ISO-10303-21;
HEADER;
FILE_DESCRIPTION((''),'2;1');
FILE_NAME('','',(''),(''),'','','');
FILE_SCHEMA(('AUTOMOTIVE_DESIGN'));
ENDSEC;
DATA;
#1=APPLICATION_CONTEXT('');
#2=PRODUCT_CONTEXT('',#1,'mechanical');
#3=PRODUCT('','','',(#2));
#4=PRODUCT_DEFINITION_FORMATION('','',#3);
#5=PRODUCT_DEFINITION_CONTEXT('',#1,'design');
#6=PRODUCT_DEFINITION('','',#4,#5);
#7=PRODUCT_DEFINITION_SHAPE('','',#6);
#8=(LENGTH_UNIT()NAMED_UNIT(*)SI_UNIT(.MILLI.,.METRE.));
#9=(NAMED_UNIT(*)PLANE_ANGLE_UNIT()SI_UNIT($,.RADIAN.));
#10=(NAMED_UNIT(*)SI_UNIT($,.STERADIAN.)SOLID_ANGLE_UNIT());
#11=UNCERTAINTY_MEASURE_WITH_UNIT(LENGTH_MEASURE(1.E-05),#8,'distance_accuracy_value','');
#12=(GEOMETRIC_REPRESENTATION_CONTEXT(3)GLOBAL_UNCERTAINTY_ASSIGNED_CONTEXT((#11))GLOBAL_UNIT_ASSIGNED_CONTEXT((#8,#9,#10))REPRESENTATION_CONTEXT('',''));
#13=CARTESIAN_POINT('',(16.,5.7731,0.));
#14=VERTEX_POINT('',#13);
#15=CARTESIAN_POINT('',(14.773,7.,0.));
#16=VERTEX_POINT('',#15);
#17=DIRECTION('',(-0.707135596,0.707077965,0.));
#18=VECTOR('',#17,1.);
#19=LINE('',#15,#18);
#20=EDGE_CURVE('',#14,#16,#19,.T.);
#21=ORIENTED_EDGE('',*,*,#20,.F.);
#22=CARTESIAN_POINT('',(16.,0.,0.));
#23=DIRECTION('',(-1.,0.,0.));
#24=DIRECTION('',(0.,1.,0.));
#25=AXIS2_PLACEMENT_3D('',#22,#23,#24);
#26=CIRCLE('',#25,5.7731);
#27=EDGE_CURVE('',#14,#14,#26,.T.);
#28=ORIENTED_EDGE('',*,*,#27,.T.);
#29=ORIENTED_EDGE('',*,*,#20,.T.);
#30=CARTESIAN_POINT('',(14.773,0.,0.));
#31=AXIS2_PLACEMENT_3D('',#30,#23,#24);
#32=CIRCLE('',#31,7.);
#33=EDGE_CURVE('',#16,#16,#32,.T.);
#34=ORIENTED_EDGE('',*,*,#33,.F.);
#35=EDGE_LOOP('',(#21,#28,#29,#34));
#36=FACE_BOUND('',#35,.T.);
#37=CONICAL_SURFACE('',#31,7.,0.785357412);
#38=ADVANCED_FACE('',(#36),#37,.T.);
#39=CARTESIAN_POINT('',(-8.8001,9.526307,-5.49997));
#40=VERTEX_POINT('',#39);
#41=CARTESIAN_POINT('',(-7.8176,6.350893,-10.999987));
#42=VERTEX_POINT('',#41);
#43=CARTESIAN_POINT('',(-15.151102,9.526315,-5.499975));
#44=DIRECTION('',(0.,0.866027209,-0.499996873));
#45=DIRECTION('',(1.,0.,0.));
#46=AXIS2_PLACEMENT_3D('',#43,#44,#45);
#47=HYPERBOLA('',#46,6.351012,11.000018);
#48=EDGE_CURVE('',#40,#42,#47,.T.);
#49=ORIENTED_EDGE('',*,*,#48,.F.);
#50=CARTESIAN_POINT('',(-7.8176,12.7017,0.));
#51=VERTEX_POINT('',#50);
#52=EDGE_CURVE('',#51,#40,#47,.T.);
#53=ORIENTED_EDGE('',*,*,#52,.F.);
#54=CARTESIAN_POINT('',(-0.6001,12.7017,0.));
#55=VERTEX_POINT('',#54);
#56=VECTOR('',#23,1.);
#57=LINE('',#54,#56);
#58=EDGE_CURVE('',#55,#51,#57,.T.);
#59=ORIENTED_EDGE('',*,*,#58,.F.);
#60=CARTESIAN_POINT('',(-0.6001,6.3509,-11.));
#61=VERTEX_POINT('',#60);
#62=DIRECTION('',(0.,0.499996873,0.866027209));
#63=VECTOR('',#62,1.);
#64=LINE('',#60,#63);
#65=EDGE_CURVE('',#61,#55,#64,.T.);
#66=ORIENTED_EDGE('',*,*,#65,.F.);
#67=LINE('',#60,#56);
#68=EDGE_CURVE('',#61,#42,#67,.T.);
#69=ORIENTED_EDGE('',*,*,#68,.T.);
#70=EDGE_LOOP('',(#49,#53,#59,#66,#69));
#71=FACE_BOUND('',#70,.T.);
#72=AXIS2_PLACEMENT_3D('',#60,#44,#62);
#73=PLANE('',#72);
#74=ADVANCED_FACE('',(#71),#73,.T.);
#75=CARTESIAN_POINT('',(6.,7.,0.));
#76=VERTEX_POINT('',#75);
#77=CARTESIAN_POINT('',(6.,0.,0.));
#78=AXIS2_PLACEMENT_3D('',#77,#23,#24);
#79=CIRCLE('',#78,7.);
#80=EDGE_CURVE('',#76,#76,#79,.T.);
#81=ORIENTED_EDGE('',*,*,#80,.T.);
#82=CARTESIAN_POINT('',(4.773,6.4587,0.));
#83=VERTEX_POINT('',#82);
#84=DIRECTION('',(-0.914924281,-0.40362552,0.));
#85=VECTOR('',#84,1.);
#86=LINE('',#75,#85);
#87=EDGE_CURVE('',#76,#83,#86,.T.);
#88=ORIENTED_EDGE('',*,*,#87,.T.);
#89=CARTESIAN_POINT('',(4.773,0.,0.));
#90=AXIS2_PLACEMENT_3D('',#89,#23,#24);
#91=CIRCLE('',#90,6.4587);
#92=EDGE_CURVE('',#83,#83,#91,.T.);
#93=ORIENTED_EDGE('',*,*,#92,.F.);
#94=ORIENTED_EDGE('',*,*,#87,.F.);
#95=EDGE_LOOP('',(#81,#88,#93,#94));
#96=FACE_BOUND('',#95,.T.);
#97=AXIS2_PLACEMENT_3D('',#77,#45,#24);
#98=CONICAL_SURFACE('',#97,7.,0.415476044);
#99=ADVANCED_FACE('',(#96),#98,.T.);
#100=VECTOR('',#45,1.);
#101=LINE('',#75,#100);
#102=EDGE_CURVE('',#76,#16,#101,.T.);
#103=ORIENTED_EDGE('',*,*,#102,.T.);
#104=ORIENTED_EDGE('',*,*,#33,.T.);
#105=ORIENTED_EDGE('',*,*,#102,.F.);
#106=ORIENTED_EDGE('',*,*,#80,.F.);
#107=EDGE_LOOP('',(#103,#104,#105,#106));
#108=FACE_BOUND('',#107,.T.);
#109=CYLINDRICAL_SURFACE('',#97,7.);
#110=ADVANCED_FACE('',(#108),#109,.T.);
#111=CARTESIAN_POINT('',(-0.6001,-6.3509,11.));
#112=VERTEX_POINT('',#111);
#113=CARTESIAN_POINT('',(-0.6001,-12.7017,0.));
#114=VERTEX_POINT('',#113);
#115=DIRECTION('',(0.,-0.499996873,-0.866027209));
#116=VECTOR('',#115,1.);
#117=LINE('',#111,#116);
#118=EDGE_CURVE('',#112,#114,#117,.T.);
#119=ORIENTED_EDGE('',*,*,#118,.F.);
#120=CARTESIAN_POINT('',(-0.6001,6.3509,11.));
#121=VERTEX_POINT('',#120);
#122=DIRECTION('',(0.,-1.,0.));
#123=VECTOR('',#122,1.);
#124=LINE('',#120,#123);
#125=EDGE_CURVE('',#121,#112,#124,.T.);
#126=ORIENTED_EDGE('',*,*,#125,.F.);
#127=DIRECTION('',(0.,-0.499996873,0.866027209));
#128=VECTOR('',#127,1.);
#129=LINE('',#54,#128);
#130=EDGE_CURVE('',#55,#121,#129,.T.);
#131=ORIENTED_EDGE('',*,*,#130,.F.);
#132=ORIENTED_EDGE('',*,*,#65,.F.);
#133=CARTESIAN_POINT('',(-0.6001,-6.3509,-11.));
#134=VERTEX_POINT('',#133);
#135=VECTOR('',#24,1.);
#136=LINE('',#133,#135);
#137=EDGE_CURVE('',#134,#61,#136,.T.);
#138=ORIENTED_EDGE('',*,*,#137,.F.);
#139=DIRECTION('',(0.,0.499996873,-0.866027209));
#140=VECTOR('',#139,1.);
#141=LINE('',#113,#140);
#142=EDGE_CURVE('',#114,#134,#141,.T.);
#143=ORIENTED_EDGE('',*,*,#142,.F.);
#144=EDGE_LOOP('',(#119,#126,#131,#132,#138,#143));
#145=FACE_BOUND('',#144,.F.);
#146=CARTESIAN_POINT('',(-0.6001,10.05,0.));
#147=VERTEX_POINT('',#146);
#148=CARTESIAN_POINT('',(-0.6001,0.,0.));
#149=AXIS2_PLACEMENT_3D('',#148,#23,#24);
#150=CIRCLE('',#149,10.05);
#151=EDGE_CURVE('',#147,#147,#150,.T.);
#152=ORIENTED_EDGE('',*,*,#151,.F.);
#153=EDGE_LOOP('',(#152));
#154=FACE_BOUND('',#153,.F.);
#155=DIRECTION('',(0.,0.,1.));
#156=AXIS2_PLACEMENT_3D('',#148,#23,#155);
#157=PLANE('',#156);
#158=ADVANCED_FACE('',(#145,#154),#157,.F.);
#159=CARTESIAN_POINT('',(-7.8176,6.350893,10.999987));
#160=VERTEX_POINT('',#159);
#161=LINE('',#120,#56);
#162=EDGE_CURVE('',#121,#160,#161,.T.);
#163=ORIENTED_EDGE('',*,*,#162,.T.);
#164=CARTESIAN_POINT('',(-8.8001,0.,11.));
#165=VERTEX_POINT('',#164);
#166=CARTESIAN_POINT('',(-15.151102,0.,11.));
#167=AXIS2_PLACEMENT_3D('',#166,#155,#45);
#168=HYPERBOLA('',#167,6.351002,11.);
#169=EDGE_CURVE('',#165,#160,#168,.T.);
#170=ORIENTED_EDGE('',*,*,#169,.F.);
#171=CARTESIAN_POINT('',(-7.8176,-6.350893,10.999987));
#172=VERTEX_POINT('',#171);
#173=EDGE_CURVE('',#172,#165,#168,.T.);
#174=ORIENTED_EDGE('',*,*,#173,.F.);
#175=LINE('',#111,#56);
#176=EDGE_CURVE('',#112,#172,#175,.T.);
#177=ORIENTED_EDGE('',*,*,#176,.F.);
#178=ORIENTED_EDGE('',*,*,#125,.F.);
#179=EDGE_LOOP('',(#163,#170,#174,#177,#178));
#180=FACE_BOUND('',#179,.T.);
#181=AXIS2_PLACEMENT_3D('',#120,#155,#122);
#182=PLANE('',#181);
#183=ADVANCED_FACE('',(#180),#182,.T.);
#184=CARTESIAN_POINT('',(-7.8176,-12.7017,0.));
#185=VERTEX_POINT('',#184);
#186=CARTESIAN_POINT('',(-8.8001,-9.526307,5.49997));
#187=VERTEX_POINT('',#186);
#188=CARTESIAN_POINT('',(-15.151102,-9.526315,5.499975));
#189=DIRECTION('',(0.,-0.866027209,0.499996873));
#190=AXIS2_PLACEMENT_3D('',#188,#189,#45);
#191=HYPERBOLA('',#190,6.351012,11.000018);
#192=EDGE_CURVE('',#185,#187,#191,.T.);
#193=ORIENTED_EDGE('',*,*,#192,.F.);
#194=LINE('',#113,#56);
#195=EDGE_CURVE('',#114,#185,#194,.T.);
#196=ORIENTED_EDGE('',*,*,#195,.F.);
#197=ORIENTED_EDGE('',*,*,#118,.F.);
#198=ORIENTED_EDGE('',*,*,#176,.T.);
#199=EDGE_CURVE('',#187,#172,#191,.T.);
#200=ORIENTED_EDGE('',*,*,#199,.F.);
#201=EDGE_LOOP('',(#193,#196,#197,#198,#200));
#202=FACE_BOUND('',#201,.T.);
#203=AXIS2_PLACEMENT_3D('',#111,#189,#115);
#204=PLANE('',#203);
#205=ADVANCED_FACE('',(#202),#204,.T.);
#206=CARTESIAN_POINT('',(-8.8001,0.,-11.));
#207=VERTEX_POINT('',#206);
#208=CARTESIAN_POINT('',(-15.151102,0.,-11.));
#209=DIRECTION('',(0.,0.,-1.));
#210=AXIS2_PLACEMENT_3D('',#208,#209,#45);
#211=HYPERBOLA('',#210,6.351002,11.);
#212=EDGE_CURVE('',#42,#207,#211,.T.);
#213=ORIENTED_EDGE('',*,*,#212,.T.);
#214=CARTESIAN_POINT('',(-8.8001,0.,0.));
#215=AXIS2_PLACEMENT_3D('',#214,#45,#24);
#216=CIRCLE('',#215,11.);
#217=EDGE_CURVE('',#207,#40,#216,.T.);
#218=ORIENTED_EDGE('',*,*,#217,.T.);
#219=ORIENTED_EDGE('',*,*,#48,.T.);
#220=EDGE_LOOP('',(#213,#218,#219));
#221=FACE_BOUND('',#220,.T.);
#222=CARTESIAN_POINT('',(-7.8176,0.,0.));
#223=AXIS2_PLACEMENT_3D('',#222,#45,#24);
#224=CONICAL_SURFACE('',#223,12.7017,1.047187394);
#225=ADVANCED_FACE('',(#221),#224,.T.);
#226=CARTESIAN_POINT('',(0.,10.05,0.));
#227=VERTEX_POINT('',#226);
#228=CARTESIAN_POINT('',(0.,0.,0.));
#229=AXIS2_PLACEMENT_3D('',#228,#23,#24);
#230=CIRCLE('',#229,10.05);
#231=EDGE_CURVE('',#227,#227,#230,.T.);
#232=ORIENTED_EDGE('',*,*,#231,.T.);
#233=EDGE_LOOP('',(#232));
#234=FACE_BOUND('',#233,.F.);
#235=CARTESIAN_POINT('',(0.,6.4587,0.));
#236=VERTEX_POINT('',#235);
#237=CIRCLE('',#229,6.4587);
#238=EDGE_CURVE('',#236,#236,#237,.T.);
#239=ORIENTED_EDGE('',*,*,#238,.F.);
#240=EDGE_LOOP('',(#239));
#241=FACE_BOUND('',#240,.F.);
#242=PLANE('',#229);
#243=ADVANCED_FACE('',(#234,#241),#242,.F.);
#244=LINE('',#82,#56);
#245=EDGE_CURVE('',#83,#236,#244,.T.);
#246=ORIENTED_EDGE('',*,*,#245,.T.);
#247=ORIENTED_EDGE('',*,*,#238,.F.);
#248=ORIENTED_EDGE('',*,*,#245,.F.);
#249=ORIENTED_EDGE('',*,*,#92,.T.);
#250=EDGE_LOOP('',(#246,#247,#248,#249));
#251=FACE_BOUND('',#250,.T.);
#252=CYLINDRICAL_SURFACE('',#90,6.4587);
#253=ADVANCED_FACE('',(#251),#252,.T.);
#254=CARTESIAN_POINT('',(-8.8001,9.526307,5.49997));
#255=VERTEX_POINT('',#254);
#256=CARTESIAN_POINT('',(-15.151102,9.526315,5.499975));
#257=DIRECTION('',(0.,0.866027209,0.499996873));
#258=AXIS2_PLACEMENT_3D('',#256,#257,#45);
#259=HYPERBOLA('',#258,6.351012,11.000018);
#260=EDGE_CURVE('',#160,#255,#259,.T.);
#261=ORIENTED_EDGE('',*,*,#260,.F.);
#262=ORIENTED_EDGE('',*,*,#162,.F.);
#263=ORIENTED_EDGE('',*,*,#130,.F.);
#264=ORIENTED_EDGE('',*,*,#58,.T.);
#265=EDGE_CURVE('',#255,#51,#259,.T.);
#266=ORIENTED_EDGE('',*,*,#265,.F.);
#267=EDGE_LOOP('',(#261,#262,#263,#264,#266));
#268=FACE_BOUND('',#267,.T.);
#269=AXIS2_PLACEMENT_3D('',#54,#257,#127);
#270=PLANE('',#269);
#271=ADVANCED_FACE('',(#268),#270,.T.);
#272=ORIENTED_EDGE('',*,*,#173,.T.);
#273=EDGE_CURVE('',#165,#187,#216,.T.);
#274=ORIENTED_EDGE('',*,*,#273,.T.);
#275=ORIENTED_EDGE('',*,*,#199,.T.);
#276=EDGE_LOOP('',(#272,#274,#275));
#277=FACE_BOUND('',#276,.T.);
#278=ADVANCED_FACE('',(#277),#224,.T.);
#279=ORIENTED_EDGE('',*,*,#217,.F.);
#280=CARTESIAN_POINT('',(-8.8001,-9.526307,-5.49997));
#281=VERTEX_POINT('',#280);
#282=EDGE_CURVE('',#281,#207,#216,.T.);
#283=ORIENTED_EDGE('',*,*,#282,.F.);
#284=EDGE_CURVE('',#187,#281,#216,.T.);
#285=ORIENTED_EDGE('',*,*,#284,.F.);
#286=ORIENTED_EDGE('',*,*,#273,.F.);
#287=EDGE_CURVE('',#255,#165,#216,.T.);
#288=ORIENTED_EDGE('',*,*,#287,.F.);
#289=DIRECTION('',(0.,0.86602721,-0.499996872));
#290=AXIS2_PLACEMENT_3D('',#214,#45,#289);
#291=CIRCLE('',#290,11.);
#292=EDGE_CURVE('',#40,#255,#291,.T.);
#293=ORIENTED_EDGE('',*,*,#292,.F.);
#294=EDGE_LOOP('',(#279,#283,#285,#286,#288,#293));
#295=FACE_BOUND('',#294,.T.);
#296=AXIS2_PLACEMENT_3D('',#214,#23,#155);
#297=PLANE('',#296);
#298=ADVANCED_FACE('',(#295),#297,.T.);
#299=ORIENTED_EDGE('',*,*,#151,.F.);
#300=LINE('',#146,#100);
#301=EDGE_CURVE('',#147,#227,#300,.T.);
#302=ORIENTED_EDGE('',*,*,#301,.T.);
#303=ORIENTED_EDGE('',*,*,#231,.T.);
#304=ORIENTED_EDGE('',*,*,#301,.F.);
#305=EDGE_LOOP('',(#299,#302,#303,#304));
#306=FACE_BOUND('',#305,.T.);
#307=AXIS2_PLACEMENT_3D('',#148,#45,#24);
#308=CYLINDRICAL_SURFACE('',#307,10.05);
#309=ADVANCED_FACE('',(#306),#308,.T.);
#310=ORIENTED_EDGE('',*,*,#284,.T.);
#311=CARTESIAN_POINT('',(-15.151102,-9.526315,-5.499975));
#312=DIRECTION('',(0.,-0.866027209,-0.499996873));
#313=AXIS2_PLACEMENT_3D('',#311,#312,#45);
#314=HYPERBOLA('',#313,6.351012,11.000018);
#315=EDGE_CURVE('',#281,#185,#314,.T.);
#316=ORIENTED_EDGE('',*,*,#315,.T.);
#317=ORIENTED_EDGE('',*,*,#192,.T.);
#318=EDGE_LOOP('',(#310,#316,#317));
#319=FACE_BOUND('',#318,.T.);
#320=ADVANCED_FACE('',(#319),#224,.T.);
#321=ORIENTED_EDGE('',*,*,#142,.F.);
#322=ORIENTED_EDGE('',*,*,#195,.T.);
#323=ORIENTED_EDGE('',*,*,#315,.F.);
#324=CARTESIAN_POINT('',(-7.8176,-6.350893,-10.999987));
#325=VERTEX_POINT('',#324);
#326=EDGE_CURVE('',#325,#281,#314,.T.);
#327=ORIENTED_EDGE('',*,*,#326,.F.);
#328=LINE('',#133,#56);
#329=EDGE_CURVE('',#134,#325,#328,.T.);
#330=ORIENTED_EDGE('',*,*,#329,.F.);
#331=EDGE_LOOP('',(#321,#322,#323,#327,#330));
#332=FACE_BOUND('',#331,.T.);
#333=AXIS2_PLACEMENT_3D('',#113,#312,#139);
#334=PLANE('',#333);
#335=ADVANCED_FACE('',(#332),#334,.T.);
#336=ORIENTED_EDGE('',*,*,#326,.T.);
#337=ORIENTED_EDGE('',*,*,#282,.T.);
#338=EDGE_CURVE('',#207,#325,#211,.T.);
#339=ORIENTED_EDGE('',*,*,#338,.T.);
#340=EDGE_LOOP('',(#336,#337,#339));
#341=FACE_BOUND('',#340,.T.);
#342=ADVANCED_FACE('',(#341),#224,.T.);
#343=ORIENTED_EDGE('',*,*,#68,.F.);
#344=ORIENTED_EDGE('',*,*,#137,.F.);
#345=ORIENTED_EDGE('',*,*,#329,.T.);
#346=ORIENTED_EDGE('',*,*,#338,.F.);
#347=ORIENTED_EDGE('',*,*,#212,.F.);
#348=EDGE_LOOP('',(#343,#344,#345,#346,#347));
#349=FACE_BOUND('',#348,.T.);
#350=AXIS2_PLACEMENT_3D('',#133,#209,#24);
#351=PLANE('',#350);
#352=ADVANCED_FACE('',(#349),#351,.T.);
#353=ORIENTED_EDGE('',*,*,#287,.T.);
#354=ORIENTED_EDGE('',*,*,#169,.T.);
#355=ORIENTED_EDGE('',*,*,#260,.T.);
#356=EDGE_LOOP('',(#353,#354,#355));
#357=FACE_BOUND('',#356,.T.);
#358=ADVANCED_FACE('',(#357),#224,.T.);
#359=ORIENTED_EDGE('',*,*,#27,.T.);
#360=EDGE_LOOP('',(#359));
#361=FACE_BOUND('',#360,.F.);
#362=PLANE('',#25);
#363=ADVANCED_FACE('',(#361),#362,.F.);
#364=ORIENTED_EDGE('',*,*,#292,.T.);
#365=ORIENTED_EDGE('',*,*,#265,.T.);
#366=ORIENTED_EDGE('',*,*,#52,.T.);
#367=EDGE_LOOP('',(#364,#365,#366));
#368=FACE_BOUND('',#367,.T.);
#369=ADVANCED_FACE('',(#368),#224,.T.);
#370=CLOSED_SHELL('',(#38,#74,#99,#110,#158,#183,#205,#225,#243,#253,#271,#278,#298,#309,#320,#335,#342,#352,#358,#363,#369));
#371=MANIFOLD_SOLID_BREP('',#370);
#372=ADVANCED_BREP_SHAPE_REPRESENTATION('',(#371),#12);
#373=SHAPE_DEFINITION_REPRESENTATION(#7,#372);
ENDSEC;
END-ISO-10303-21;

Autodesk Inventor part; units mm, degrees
ref_plane "YZ Plane" through (0, 0, 0) normal (1, 0, 0) x (0, 1, 0)
ref_plane "XZ Plane" through (0, 0, 0) normal (0, 1, 0) x (-1, 0, 0)
sketch "Sketch1" plane through (0, 0, 0) normal (0, 0, 1) x (1, 0, 0)
  line L0 (0, 10.05) -> (0, 6.4587)
  line L1 (6, 7) -> (16, 7)
  line L2 (16, 7) -> (16, 0)
  line L3 (16, 0) -> (-0.6001, 0)
  line L4 (-3.9201, 0) -> (19.32, 0) projected
  line L5 (-0.6001, 0) -> (-0.6001, 10.05)
  line L6 (-0.6001, 10.05) -> (0, 10.05)
  line L7 (6, 7) -> (4.773, 6.4587)
  line L8 (4.773, 6.4587) -> (0, 6.4587)
  line L9 (0, -2.01) -> (0, 12.06) projected
  dimension "d0" = 16
  dimension "d1" = 10
  dimension "d2" = 14
  dimension "d9" = 0.6001
  dimension "d10" = 20.1
  dimension "d13" = 1.227
  dimension "d14" = 12.9175
revolve "Body" add sketch "Sketch1" angle 360 about axis through (16, 0, 0) along (-1, 0, 0)
sketch "Sketch2" plane through (-0.6001, 0, 0) normal (-1, 0, 0) x (0, 0, 1)
  line L0 (0, 12.7017) -> (11, 6.3509)
  line L1 (11, 6.3509) -> (11, -6.3509)
  line L2 (11, -6.3509) -> (0, -12.7017)
  line L3 (0, -12.7017) -> (-11, -6.3509)
  line L4 (-11, -6.3509) -> (-11, 6.3509)
  line L5 (-11, 6.3509) -> (0, 12.7017)
  point P0 (0, 0)
  point P1 (0, 0)
  dimension "d11" = 22
extrude "Head" add sketch "Sketch2" along normal blind 8.2
sketch "Sketch4" plane through (0, 0, 0) normal (0, 0, 1) x (1, 0, 0)
  line L0 (-8.8001, 11) -> (-8.8001, 12.7017)
  line L1 (-8.8001, 12.7017) -> (-7.8176, 12.7017)
  line L2 (-7.8176, 12.7017) -> (-8.8001, 11)
  line L3 (-10.4401, 0) -> (1.0399, 0) projected
  line L4 (-0.6001, 12.7017) -> (-8.8001, 12.7017) projected
  line L5 (-8.8001, 6.3509) -> (-8.8001, 12.7017) projected
  dimension "d5" = 30
  dimension "d19" = 22
revolve "Chamfer1" cut sketch "Sketch4" angle 360 about axis through (-10, 0, 0) along (1, 0, 0)
thread "Thread" size "M14x2" class "6g" standard "ISO Metric profile" length 10
chamfer "Chamfer2" distance 1.2269 distance2 1.227 1 edges at (16, -7, 0) measured on face at (16, 0.4064, -1.8087)
ref_plane "Work Plane1" through (1.525, 0, 0) normal (0, 0, 1) x (1, 0, 0)
equation "\"d0\" = NLG"
equation "\"d1\" = GEL"
equation "\"d2\" = GD"
equation "\"d10\" = SD2"
equation "\"d14\" = BDM"
equation "\"d11\" = SW"
equation "\"d3\" = KOH - SD"
equation "\"d5\" = ANG1"
equation "\"d19\" = SW0"
equation "\"d15\" = GEL"
equation "\"d6\" = -0.5 * SPD + 0.5 * GD"
equation "\"NLG\" = 16"
equation "\"GD\" = NND"
equation "\"BDM\" = 12.91747"
equation "\"KOH\" = 8.8"
equation "\"GEL\" = 10"
equation "\"SW\" = 22"
equation "\"SW0\" = 22"
equation "\"SPD\" = NND - 1.2269 * PTC"
equation "\"SD2\" = 20.1"
equation "\"SD\" = 0.6"
equation "\"ANG1\" = 30deg"
equation "\"GAL\" = 0.61345 * PTC"
equation "\"GUL\" = 0.61345 * PTC"
equation "\"RR\" = 0.6"
equation "\"GD1\" = THREADDIA - 1.2269 * PTC"
equation "\"THREADDIA\" = 14"
equation "\"TOA\" = 30deg"
equation "\"PTC\" = 2"
equation "\"NND\" = 14"
equation "\"E0\" = 1.155 * SW"
properties part number "DIN 933 - M14  x 16" material "Steel, Mild"
